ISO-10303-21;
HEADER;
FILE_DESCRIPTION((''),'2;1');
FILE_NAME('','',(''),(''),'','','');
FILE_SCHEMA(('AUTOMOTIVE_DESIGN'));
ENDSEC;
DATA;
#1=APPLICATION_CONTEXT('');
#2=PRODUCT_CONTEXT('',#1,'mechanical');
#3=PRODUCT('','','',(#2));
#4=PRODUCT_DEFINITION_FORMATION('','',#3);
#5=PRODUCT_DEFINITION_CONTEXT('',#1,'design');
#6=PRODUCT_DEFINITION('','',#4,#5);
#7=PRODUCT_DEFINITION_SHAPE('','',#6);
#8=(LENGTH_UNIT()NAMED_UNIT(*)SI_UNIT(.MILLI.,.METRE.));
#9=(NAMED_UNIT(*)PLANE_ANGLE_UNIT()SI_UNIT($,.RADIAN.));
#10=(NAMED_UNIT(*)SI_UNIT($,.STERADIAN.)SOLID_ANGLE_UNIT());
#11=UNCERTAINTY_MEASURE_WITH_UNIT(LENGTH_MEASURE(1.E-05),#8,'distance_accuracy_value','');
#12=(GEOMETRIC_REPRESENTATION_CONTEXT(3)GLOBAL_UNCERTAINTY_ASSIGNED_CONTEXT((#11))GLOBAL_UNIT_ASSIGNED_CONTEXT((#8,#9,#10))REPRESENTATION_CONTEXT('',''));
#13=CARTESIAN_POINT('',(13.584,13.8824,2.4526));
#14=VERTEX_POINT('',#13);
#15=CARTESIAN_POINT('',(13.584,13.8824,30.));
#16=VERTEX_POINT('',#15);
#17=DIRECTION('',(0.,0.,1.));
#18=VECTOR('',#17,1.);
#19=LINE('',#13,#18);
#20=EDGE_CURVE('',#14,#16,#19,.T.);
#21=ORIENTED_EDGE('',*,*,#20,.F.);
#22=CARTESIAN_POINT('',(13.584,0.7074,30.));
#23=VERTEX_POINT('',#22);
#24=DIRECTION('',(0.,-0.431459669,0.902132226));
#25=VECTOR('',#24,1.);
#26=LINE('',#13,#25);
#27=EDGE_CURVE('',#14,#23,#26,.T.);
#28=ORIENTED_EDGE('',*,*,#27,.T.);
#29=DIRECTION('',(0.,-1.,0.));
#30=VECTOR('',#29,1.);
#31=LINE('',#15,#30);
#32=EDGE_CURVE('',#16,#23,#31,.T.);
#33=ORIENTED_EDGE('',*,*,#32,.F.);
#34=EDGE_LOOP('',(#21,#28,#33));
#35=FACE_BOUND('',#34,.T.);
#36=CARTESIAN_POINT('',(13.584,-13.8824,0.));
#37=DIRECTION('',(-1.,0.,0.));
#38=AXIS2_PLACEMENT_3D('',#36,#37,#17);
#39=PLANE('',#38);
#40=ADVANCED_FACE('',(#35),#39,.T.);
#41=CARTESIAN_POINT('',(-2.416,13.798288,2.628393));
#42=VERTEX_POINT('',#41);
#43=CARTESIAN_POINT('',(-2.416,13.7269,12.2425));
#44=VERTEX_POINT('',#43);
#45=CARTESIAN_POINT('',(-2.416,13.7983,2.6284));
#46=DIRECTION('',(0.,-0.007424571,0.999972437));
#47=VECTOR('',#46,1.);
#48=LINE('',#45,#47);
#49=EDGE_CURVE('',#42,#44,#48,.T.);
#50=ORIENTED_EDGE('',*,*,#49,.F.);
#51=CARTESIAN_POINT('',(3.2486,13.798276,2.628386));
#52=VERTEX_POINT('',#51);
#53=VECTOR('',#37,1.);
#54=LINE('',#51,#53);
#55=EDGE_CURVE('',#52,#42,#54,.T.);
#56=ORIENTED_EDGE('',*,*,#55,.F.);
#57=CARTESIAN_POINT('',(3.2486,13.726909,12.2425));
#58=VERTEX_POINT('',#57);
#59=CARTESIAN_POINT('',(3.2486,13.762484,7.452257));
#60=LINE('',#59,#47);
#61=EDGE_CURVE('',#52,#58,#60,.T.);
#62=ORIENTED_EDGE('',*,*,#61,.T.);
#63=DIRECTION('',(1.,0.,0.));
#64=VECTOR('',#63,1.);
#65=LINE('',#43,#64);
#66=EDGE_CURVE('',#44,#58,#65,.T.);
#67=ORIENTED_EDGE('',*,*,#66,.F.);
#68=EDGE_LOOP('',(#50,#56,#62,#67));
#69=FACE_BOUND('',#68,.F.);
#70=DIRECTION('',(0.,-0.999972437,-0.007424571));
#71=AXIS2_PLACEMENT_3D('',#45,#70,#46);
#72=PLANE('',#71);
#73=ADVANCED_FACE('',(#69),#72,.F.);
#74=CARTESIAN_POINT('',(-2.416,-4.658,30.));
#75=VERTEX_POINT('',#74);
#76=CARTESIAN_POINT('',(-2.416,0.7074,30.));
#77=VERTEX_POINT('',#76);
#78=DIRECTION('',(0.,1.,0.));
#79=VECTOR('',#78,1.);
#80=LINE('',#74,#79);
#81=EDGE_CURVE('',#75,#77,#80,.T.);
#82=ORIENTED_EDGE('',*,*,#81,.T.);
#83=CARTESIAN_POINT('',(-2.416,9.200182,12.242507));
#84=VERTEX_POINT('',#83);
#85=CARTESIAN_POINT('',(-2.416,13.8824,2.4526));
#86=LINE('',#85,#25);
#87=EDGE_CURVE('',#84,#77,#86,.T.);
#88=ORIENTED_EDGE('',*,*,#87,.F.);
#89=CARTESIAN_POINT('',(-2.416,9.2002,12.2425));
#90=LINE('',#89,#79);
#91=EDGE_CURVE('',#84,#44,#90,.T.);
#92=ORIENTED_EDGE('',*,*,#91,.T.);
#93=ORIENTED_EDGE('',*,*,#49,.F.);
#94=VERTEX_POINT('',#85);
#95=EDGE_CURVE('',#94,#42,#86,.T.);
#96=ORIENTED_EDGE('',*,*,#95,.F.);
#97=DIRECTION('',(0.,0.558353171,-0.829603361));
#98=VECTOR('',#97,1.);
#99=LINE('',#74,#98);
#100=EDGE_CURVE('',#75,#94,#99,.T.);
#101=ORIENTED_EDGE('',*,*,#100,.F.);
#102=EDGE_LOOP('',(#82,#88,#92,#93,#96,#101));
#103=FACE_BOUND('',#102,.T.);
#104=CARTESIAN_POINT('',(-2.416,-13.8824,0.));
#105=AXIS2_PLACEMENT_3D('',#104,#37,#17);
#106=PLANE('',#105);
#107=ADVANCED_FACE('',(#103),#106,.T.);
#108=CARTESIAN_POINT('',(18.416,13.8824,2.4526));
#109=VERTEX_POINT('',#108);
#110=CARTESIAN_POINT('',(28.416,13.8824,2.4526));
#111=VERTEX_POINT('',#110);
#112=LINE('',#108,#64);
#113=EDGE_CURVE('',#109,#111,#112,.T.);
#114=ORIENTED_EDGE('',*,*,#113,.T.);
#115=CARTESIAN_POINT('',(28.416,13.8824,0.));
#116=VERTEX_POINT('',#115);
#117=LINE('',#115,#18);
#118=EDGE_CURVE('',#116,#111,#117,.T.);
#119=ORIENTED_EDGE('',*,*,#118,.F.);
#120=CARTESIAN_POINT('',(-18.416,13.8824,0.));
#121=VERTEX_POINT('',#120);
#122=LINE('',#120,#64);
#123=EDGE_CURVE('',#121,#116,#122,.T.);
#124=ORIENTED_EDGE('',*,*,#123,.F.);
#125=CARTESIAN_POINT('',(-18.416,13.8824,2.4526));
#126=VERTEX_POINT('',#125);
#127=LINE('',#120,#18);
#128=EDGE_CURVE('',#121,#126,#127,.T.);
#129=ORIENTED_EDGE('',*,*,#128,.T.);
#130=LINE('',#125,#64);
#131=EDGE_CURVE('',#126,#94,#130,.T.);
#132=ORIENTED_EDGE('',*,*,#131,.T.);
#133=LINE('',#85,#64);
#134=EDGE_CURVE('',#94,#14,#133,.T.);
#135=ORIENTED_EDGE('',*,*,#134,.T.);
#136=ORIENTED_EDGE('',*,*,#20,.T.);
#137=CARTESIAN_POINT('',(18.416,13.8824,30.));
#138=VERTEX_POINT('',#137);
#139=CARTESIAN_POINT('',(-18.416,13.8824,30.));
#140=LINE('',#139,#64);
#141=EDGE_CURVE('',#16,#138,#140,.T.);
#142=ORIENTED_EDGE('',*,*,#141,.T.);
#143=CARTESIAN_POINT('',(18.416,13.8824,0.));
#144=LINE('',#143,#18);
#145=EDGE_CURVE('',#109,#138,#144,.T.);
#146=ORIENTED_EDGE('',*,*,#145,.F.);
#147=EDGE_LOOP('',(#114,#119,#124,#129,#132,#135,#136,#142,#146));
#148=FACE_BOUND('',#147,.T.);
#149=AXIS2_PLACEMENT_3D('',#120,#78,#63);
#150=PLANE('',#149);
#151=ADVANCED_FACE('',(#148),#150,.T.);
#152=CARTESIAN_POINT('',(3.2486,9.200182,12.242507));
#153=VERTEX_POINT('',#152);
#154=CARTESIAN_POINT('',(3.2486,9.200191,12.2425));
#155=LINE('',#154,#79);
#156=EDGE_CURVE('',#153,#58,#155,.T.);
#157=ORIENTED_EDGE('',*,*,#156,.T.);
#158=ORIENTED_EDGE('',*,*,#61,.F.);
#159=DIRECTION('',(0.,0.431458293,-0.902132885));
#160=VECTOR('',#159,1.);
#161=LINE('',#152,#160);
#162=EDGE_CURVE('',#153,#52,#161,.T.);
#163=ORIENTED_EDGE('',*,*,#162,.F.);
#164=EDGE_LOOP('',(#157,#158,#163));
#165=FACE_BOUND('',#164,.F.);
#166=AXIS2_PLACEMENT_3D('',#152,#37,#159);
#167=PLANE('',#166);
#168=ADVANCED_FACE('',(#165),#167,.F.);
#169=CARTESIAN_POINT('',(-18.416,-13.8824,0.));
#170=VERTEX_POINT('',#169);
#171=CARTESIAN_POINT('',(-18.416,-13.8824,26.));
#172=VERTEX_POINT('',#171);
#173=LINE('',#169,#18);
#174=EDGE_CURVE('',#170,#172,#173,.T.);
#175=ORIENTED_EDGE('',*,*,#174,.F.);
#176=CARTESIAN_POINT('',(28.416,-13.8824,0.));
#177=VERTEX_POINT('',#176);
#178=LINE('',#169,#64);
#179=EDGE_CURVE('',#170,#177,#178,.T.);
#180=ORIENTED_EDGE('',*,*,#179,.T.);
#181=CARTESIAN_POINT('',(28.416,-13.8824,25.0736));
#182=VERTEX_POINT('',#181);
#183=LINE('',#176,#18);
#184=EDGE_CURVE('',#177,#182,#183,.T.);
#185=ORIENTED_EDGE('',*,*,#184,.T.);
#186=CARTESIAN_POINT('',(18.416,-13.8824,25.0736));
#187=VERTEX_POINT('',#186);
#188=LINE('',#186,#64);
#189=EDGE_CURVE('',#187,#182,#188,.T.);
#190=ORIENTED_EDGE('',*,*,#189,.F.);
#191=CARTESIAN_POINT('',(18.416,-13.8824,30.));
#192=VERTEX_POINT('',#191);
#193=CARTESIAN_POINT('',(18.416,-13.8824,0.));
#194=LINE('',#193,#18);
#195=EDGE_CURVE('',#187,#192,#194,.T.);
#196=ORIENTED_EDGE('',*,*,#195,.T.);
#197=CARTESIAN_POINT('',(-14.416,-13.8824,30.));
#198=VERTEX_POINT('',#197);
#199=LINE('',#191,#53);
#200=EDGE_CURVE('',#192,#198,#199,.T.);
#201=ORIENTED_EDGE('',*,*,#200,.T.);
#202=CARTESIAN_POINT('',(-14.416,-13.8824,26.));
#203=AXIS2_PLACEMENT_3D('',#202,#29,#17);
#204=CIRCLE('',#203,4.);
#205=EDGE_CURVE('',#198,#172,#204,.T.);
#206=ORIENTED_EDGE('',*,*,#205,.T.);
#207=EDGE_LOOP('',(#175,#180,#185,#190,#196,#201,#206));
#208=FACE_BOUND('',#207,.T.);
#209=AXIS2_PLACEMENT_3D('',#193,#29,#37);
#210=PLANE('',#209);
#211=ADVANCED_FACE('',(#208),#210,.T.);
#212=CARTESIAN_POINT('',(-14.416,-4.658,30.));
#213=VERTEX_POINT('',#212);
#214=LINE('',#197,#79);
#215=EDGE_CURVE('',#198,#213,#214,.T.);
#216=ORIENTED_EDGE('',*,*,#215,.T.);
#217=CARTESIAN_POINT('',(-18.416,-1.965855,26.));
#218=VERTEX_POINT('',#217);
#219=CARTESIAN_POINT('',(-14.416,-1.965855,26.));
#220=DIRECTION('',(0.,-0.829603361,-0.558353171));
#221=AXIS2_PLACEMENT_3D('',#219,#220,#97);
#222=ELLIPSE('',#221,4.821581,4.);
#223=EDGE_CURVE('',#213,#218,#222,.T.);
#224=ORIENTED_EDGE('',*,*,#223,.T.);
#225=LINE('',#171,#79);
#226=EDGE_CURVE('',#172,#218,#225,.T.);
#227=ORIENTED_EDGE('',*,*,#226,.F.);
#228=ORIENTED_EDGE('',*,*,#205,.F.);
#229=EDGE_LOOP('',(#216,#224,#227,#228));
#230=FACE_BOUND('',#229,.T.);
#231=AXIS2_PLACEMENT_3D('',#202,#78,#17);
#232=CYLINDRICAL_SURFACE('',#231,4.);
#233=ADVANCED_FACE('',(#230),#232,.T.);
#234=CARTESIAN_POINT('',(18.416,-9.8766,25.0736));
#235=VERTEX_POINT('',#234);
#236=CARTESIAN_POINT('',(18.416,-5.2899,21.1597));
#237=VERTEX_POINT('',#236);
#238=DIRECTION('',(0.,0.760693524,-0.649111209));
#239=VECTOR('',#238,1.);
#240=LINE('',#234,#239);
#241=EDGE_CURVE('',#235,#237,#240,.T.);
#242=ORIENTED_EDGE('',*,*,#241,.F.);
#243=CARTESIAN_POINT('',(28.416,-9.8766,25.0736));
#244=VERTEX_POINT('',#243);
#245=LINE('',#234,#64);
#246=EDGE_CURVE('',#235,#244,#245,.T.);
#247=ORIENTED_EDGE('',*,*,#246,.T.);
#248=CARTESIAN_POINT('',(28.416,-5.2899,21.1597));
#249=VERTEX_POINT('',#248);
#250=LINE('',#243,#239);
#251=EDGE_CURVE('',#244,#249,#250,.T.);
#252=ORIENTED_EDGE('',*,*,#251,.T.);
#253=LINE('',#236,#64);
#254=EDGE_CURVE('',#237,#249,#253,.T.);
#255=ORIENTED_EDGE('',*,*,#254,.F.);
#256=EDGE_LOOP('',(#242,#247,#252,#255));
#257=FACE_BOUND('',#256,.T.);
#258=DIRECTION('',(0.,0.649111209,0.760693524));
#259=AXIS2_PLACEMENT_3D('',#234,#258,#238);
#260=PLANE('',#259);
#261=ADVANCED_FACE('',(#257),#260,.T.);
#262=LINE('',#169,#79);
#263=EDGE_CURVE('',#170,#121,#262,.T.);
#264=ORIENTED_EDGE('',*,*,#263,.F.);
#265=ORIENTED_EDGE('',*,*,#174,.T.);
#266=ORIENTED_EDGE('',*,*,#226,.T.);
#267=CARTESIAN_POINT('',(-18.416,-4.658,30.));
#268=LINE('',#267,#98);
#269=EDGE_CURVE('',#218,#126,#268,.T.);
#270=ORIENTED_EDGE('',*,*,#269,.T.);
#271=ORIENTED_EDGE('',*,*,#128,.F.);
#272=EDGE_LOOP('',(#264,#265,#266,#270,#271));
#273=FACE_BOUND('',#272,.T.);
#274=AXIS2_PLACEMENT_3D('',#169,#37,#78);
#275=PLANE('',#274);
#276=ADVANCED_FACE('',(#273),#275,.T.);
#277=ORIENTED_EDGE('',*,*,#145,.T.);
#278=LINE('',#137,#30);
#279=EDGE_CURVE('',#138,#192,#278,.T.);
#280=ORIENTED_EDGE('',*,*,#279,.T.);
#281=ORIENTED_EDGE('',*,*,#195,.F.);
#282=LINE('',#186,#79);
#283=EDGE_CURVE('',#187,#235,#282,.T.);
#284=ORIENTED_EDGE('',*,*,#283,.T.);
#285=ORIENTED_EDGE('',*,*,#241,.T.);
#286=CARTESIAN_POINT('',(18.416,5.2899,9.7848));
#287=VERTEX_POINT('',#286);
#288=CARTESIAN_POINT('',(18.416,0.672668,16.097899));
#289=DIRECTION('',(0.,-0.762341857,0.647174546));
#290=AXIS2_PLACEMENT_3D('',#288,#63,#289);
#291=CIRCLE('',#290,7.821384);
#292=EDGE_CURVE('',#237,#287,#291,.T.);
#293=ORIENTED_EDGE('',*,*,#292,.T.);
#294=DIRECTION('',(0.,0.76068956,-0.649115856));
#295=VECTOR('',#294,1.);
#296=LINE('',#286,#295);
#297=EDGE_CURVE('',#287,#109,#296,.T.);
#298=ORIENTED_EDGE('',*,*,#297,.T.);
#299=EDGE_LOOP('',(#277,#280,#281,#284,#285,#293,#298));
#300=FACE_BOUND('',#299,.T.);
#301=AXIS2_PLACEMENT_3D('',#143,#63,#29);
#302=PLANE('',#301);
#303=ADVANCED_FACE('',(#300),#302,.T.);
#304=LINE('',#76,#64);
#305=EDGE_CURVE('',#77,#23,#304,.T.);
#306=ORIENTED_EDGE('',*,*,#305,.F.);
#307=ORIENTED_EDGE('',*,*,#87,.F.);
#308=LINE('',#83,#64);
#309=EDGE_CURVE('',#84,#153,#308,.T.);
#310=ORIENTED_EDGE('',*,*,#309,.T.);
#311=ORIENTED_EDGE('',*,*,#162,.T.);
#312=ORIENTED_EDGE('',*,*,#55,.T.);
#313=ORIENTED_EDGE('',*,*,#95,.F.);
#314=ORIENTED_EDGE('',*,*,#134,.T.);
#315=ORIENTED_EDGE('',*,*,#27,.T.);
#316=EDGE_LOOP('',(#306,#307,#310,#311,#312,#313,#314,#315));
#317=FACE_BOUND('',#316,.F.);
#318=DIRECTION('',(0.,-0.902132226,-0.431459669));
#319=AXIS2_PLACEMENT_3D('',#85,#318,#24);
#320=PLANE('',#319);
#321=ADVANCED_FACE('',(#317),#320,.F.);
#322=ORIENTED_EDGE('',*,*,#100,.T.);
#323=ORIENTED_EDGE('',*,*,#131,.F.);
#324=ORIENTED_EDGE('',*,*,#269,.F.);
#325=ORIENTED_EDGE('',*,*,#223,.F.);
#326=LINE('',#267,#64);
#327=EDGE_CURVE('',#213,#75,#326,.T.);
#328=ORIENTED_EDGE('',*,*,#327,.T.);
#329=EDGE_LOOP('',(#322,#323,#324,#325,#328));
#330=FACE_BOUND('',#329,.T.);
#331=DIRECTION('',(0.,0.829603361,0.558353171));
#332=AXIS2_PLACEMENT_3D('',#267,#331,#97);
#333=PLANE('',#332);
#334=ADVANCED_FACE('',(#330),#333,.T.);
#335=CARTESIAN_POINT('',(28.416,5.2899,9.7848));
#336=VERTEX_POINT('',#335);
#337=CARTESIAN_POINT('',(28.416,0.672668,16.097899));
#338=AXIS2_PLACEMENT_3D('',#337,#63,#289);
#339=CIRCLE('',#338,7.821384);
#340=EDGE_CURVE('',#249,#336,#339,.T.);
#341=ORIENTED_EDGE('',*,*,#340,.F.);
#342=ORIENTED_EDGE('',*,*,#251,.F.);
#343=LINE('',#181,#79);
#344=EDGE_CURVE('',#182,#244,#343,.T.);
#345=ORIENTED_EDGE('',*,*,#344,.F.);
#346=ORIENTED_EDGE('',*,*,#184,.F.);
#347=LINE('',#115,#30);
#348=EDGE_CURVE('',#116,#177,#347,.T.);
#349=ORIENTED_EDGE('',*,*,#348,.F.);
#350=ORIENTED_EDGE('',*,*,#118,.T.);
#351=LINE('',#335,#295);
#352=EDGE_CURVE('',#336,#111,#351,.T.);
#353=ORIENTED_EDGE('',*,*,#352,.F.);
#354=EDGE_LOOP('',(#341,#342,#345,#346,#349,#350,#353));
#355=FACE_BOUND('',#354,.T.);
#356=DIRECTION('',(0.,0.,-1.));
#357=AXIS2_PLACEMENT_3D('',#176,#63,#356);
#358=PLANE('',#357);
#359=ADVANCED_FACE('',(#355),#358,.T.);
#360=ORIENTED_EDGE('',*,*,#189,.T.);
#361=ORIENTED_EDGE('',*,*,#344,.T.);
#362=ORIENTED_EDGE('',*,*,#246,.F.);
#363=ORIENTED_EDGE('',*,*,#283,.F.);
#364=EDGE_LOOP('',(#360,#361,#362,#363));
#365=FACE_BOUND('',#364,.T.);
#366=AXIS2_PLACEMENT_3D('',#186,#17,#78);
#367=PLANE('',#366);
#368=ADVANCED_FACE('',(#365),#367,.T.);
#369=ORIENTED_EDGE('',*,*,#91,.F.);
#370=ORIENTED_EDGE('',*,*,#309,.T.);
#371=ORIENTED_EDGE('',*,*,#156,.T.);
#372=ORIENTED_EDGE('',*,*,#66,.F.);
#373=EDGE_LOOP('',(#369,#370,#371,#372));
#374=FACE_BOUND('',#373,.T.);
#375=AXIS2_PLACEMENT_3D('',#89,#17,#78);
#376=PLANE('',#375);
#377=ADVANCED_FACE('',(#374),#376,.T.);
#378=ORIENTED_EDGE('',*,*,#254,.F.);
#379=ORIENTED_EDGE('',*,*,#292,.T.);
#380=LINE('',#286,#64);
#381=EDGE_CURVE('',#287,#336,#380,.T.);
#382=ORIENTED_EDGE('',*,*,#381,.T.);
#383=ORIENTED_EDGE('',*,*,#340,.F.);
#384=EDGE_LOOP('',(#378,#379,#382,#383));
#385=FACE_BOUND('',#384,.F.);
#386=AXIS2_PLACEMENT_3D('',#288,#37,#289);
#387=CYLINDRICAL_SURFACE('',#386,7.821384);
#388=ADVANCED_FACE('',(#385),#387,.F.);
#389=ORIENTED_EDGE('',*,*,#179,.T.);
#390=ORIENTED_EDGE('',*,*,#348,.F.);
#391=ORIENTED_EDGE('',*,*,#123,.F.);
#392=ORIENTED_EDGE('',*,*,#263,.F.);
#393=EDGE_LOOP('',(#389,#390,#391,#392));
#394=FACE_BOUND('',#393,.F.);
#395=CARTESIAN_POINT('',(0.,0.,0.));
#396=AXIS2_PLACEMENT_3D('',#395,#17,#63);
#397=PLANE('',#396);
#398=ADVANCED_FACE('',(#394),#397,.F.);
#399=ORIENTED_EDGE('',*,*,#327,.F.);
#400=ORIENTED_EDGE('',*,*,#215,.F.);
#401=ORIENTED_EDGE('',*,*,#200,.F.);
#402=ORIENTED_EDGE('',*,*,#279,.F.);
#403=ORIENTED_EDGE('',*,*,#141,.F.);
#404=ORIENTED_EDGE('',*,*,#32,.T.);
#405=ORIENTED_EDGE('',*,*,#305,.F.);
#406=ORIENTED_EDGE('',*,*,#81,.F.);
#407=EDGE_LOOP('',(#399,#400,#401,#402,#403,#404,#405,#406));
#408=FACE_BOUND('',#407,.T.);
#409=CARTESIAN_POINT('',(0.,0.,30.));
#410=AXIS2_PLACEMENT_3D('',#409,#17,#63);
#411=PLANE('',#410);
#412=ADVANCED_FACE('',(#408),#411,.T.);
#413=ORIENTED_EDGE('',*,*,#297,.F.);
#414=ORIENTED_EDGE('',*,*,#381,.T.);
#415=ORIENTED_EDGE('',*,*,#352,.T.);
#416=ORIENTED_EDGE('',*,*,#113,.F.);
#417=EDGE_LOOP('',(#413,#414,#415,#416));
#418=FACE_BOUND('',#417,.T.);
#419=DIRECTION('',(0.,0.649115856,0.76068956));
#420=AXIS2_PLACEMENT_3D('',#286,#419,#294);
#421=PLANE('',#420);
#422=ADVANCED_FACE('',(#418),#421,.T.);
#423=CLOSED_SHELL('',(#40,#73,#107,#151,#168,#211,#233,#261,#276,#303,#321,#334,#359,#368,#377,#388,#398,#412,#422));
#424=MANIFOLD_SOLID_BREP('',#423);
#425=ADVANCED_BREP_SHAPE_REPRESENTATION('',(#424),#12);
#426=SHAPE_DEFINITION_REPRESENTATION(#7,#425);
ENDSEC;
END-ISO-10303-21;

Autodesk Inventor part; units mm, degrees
ref_plane "YZ Plane" through (0, 0, 0) normal (1, 0, 0) x (0, 1, 0)
ref_plane "XZ Plane" through (0, 0, 0) normal (0, 1, 0) x (-1, 0, 0)
ref_plane "XY Plane" through (0, 0, 0) normal (0, 0, 1) x (1, 0, 0)
sketch "스케치1" plane through (0, 0, 0) normal (0, 0, 1) x (1, 0, 0)
  line L0 (18.416, -13.8824) -> (-18.416, -13.8824)
  line L1 (-18.416, -13.8824) -> (-18.416, 13.8824)
  line L2 (-18.416, 13.8824) -> (18.416, 13.8824)
  line L3 (18.416, 13.8824) -> (18.416, -13.8824)
  line L4 (18.416, -13.8824) -> (-18.416, 13.8824) construction
  line L5 (-18.416, -13.8824) -> (18.416, 13.8824) construction
  point P0 (0, 0)
extrude "돌출1" add sketch "스케치1" along normal blind 30
sketch "스케치2" plane through (18.416, -13.8824, 0) normal (1, 0, 0) x (0, 0, -1)
  line L0 (0, 27.7648) -> (0, 0) projected
  line L1 (0, 0) -> (-30, 0) projected
  line L2 (-25.0736, 0) -> (-25.0736, 4.0058)
  line L3 (-25.0736, 4.0058) -> (-21.1597, 8.5925)
  arc A0 (-21.1597, 8.5925) -> (-9.7848, 19.1723) centre (-16.0979, 14.5551) ccw
  line L4 (-9.7848, 19.1723) -> (-2.4526, 27.7648)
  line L5 (0, 27.7648) -> (-30, 27.7648) projected
  line L6 (0, 27.7648) -> (0, 0)
  point P0 (0, 13.8824)
extrude "돌출2" add sketch "스케치2" along normal blind 10
sketch "스케치3" plane through (-18.416, -13.8824, 0) normal (-1, 0, 0) x (0, 0, 1)
  line L0 (9.7848, 19.1723) -> (2.4526, 27.7648) projected
  line L1 (0, 27.7648) -> (30, 27.7648) projected
  line L2 (2.4526, 27.7648) -> (0, 27.7648)
  line L3 (0, 27.7648) -> (0, 6.044)
  line L4 (0, 0) -> (0, 27.7648) projected
  line L5 (30, 9.2244) -> (2.4526, 27.7648)
  line L6 (30, 9.2244) -> (30, 27.7648)
  point P0 (0, 13.8824)
extrude "돌출3" cut sketch "스케치3" against normal blind 16
sketch "스케치4" plane through (-2.416, -13.8824, 0) normal (-1, 0, 0) x (0, 0, 1)
  line L0 (2.4526, 27.7648) -> (30, 27.7648) projected
  line L1 (2.4526, 27.7648) -> (30, 14.5898)
  line L2 (30, 27.7648) -> (30, 9.2244) projected
  line L3 (30, 27.7648) -> (2.4526, 27.7648)
  point P0 (0, 13.8824)
extrude "돌출4" cut sketch "스케치4" against normal blind 16
sketch "스케치5" plane through (-2.416, 0.7074, 30) normal (0, 0.9021329, 0.4314583) x (1, 0, 0)
  line L0 (0, -2.315) -> (0, 30.5359) projected
  line L1 (5.6646, 30.341) -> (0, 30.341)
  line L2 (0, 30.341) -> (0, 19.6839)
  line L3 (0, 19.6839) -> (5.6646, 19.6839)
  line L4 (5.6646, 19.6839) -> (5.6646, 30.341)
  point P0 (2.416, 26.7588)
extrude "돌출5" add sketch "스케치5" along normal blind 5
sketch "스케치6" plane through (-2.416, -13.8824, 0) normal (-1, 0, 0) x (0, 0, 1)
  line L0 (30, 14.5898) -> (2.4526, 27.7648) projected
  line L1 (12.2425, 23.0826) -> (14.3998, 27.5933) projected
  line L2 (2.6284, 27.6807) -> (14.3998, 27.5933)
  line L3 (4.7857, 32.1914) -> (14.3998, 27.5933) projected
  line L4 (14.3998, 27.5933) -> (4.7857, 32.1914)
  line L5 (4.7857, 32.1914) -> (2.6284, 27.6807)
  point P0 (0, 13.8824)
extrude "돌출6" cut sketch "스케치6" against normal blind 9 contours L5 L3 L2
sketch "스케치7" plane through (-2.416, -13.8824, 0) normal (-1, 0, 0) x (0, 0, 1)
  line L0 (12.2425, 23.0826) -> (14.3998, 27.5933) projected
  line L1 (14.3998, 27.5933) -> (12.2425, 23.0826)
  line L2 (12.2425, 23.0826) -> (12.2425, 27.6093)
  line L3 (14.3998, 27.5933) -> (2.6284, 27.6807) projected
  point P0 (0, 13.8824)
extrude "돌출7" cut sketch "스케치7" against normal blind 9
fillet "모깎기1" radius 4 1 edges at (-18.416, -9.2702, 30)
properties part number "240516_3Dsketch01"
